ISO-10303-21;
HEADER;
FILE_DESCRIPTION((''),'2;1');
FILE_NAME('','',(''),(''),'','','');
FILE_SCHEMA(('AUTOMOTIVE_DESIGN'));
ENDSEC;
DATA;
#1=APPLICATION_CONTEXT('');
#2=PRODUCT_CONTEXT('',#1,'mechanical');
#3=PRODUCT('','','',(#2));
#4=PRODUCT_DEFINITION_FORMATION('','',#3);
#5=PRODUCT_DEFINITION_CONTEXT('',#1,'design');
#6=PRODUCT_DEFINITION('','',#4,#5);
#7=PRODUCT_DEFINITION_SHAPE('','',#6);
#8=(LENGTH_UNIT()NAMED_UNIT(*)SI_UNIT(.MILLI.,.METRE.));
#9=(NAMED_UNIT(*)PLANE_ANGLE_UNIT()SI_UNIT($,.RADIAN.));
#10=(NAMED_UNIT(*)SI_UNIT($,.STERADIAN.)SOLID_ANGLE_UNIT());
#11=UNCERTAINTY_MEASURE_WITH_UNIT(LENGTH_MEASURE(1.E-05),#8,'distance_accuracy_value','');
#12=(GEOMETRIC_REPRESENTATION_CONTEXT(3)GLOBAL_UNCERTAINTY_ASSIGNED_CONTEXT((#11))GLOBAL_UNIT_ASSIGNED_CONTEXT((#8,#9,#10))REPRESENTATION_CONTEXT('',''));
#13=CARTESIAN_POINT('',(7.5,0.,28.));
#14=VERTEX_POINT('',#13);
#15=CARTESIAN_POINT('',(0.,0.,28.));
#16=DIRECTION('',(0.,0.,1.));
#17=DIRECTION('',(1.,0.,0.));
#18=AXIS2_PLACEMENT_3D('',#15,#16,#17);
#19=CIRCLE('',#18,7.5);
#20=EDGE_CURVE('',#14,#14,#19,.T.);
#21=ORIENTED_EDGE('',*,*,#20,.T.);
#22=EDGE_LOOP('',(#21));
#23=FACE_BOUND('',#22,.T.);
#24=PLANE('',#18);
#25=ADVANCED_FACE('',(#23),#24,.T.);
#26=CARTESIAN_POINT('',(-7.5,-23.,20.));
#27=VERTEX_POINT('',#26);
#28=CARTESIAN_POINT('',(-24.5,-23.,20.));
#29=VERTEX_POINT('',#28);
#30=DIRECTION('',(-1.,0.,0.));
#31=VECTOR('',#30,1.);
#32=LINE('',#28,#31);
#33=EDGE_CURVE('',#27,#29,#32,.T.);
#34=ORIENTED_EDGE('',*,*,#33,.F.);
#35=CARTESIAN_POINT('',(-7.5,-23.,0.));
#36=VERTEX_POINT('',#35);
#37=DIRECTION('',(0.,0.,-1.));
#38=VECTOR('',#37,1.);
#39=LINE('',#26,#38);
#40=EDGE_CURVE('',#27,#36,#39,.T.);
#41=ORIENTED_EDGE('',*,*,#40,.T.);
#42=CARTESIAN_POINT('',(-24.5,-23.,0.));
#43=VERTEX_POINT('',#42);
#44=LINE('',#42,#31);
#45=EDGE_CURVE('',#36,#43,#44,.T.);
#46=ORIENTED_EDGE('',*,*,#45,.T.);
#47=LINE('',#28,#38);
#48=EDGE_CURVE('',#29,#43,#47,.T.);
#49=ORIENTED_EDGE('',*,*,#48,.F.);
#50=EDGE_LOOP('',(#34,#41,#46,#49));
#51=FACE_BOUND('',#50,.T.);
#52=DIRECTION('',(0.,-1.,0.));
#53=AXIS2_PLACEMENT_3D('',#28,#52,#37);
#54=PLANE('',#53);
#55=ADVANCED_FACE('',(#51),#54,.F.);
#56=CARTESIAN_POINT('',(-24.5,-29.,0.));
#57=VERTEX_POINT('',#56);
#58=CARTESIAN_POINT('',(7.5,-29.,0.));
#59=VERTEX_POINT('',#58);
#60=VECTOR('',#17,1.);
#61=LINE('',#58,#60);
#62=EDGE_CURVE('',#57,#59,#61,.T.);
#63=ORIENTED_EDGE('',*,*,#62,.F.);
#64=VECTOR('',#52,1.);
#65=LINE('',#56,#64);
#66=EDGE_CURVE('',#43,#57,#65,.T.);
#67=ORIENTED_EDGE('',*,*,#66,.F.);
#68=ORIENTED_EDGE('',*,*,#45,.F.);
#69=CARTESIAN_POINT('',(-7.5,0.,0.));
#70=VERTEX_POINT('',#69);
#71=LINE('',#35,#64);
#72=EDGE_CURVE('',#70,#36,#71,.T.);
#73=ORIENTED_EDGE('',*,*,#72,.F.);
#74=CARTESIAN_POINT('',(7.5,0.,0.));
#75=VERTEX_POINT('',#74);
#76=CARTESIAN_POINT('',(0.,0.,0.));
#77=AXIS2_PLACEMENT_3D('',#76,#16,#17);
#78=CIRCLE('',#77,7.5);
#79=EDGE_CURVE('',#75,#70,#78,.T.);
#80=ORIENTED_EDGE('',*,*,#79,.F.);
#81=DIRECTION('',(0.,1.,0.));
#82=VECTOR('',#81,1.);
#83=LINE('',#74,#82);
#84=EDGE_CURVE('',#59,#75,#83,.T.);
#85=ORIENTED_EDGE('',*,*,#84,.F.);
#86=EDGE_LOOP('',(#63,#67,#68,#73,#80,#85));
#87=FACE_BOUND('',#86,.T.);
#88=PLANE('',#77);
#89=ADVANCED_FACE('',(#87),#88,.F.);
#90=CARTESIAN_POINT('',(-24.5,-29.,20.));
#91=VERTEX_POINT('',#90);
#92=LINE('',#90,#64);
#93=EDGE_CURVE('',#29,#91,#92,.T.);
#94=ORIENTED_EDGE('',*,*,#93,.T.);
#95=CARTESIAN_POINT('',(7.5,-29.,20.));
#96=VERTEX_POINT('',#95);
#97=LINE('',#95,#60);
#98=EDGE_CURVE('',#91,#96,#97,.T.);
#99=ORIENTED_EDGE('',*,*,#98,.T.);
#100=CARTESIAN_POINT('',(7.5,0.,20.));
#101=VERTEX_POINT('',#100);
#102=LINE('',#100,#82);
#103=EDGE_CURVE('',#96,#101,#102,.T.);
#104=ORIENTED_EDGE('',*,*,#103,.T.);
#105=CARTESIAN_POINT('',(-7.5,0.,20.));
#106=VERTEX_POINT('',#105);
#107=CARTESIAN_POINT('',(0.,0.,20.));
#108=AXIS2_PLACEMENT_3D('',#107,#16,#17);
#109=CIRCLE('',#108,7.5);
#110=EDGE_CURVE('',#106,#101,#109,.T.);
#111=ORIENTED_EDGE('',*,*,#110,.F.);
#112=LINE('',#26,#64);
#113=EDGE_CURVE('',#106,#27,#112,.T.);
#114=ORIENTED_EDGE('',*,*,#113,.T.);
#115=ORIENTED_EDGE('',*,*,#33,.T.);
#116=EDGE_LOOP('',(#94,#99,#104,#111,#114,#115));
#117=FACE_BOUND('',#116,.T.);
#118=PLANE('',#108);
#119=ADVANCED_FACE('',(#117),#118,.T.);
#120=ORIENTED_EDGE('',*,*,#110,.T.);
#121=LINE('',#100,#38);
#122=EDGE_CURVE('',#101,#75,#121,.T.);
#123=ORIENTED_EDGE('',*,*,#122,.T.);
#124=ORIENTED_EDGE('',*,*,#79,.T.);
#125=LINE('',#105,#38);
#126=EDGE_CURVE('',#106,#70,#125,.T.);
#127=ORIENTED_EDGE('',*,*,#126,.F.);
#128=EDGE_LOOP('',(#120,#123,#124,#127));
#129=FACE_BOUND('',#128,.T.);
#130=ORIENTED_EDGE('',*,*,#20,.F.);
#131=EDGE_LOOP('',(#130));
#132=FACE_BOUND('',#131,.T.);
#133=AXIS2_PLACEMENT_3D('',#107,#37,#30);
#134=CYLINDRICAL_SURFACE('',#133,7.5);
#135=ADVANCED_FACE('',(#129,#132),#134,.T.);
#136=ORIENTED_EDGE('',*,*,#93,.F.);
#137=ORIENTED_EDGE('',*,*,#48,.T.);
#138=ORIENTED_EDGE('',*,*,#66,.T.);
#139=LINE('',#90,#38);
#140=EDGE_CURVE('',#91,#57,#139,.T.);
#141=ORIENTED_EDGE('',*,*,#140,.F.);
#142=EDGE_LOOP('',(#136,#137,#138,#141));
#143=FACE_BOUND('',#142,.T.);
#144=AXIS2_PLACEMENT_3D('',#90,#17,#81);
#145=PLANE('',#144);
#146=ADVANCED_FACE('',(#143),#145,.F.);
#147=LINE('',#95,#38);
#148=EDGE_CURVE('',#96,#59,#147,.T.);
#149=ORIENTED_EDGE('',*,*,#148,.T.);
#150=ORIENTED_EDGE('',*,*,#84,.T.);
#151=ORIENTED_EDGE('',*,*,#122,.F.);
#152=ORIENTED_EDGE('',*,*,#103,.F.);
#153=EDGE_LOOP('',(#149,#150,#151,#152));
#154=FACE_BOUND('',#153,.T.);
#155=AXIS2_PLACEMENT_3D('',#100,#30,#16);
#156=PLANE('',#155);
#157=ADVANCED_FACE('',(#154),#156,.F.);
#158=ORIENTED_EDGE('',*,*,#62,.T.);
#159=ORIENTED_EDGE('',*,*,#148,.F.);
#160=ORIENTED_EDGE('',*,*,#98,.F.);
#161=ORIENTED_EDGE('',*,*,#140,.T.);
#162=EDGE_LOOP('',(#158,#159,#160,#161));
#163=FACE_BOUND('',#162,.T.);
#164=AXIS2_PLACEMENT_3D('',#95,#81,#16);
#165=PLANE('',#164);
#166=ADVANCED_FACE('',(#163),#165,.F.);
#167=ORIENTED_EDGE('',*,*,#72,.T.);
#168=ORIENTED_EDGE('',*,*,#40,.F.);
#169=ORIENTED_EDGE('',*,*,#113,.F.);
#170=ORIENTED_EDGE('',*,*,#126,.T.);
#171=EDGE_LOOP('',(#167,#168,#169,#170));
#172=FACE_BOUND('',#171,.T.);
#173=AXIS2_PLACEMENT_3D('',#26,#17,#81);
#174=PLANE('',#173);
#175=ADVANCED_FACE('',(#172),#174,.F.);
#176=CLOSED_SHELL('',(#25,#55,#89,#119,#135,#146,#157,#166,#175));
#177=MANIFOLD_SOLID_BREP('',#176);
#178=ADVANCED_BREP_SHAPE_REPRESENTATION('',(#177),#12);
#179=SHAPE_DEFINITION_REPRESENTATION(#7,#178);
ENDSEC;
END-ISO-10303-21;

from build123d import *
from build123d.topology import SkipClean

# Parameters (mm, degrees)
BOSS_EXTRUDE1_DEPTH = 20
SKETCH3_R           = 7.5
BOSS_EXTRUDE3_DEPTH = 8


with BuildPart() as part:
    # Sketch1 → Boss-Extrude1 (new body)
    with BuildSketch(Plane.XY):
        with BuildLine():
            Line((7.5, 0), (7.5, -29))
            Line((7.5, -29), (-24.5, -29))
            Line((-24.5, -29), (-24.5, -23))
            Line((-24.5, -23), (-7.5, -23))
            Line((-7.5, -23), (-7.5, 0))
            ThreePointArc((-7.5, 0), (0, 7.5), (7.5, 0))
        make_face()
    extrude(amount=BOSS_EXTRUDE1_DEPTH)

    # Sketch3 → Boss-Extrude3 (add)
    with SkipClean():  # the faces are left unmerged after this step: merging them gives an invalid solid
        with BuildSketch(Plane.XY.offset(20)):
            Circle(SKETCH3_R)
        extrude(amount=BOSS_EXTRUDE3_DEPTH)
    add(part.part.scale(1), mode=Mode.REPLACE)  # the faces are merged on a copy


solid = part.part
